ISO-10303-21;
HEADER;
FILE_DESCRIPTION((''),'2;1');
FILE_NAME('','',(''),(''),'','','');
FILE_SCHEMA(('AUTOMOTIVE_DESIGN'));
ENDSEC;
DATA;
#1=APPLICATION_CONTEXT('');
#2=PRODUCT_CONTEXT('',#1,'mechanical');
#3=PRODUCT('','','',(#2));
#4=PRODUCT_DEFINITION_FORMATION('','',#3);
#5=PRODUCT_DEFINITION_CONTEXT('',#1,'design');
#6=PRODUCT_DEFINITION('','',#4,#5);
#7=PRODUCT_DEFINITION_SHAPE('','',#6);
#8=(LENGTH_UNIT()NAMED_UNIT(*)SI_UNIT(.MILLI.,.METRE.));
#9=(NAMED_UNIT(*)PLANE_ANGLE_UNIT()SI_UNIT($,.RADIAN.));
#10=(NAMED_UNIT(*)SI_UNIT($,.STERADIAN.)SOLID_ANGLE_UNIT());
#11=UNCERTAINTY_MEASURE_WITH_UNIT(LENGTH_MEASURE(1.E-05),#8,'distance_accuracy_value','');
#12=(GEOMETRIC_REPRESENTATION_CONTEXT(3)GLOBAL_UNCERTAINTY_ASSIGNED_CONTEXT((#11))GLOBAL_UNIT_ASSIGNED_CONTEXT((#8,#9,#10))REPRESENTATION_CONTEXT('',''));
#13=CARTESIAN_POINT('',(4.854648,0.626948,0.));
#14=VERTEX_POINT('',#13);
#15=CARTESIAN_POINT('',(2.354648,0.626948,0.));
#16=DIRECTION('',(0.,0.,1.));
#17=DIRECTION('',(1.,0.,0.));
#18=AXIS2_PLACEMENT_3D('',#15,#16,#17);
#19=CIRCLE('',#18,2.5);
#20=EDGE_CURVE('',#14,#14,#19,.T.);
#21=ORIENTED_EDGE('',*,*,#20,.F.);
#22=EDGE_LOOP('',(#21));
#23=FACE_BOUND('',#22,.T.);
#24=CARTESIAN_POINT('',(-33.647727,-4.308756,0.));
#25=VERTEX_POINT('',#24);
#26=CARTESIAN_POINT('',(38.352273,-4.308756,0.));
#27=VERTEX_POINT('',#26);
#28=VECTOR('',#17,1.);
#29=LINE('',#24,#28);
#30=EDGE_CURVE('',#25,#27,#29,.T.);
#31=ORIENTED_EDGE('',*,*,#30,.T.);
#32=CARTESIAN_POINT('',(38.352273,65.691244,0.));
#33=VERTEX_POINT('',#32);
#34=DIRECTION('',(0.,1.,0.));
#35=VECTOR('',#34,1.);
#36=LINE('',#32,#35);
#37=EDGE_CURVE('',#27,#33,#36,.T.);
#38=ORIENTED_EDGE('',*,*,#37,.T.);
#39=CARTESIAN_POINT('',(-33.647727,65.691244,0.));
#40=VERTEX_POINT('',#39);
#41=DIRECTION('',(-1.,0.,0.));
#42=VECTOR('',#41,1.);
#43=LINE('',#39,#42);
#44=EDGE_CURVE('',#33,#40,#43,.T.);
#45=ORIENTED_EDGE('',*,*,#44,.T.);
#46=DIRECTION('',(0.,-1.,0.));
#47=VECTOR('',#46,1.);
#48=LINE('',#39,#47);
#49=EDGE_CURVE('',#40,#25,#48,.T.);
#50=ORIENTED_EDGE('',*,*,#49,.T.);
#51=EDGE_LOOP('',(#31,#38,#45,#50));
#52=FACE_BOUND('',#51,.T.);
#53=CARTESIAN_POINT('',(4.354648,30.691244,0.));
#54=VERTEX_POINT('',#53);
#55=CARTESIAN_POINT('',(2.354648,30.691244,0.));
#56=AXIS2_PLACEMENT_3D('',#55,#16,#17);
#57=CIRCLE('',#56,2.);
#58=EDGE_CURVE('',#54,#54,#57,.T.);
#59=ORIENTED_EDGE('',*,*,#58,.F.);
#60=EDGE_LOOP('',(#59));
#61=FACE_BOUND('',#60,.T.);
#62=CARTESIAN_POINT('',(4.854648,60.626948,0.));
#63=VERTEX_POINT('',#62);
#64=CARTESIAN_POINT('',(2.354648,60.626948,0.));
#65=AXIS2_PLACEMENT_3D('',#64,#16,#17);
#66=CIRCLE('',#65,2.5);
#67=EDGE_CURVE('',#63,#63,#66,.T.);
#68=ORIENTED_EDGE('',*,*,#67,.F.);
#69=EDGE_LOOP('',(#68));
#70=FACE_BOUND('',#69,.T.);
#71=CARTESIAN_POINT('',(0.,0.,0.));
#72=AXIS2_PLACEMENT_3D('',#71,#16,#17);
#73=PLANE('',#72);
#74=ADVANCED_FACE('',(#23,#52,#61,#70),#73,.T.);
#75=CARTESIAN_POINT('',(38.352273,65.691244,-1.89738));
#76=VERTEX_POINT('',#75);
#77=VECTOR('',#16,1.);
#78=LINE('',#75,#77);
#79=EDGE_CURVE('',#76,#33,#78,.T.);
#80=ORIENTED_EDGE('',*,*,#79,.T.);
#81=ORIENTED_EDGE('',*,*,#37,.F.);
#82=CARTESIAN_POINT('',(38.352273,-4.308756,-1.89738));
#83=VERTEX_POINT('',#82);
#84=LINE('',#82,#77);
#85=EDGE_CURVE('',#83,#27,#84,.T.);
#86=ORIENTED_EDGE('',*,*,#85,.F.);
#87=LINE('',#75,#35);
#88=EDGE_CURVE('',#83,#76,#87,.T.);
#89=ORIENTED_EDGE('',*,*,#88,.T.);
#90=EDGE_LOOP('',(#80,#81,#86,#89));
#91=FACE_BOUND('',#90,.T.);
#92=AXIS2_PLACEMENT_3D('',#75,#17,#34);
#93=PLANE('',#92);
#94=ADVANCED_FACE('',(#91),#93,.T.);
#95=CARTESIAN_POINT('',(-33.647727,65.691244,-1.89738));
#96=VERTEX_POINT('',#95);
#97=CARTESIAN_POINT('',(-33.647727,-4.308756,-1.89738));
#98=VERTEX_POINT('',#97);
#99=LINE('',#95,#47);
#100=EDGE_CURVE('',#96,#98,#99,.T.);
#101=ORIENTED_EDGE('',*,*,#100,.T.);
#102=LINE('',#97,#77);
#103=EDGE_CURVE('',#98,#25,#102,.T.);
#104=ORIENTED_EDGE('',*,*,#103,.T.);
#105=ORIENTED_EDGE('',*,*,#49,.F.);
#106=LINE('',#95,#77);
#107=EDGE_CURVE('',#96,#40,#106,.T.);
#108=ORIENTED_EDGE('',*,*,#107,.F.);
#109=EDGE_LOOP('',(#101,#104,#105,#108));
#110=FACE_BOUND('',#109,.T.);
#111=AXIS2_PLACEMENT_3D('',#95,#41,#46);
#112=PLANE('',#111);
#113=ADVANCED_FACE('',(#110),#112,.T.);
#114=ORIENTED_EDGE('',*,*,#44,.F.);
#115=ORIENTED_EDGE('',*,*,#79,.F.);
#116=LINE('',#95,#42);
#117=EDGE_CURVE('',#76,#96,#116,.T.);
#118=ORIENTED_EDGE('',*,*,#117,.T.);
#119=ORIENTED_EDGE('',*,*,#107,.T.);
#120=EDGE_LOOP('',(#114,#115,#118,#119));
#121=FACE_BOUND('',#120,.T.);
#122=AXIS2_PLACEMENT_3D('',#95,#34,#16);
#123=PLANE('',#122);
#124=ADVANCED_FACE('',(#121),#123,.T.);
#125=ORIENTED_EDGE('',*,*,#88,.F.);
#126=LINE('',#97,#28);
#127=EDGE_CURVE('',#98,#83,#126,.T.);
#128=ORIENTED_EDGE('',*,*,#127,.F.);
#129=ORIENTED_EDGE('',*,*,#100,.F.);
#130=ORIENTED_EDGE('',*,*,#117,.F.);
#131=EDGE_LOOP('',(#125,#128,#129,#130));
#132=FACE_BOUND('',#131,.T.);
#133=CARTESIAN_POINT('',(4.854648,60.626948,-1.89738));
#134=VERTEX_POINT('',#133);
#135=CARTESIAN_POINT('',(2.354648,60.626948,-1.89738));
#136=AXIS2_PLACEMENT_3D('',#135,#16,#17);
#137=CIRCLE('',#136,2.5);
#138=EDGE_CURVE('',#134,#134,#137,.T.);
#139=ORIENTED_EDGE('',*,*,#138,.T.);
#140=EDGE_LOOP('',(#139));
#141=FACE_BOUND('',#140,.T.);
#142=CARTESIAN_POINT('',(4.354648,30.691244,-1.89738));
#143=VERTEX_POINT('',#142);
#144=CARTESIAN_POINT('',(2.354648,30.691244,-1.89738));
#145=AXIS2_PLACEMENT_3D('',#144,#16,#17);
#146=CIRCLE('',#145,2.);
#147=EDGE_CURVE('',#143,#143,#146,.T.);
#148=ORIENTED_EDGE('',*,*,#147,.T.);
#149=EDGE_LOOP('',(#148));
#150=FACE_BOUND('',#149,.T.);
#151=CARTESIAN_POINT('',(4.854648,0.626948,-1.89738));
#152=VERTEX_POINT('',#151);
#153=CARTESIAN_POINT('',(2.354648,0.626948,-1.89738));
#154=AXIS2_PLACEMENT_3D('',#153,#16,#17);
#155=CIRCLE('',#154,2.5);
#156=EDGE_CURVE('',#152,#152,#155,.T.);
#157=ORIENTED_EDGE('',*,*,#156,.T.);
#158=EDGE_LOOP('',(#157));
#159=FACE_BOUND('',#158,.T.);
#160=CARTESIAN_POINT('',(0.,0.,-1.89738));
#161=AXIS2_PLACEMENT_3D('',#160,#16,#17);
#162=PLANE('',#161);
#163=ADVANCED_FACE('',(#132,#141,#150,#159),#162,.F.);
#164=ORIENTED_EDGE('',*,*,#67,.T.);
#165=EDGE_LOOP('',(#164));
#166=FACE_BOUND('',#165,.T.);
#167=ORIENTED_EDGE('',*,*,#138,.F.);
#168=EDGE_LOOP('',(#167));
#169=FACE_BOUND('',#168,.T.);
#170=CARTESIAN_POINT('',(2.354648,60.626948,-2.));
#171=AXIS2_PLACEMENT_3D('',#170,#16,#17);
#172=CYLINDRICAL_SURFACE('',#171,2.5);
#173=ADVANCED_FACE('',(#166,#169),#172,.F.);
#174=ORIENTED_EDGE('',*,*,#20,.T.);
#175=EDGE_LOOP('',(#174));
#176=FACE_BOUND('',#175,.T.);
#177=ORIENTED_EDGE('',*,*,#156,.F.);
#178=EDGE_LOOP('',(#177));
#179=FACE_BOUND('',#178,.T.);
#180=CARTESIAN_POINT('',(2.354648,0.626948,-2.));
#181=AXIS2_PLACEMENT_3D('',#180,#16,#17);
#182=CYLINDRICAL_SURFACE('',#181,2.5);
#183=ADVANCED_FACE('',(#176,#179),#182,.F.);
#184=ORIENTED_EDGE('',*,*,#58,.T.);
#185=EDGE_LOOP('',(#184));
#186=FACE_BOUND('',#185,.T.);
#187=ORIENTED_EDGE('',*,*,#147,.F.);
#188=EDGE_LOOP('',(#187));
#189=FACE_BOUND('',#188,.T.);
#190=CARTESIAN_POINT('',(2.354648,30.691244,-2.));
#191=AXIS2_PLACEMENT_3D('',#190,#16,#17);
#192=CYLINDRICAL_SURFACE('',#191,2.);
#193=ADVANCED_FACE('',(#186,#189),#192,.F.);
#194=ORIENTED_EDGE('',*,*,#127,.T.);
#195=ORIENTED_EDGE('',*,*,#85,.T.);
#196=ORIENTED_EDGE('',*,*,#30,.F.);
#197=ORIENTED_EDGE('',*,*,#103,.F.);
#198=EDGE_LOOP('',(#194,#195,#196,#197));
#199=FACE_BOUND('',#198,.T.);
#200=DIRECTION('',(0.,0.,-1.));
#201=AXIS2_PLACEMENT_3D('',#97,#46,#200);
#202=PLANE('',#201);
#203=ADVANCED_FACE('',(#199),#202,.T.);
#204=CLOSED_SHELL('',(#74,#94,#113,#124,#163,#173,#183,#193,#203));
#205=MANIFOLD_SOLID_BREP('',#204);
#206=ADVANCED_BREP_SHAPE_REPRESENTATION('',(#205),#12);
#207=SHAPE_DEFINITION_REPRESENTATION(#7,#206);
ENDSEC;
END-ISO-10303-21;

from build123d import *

# Parameters (mm, degrees)
SKETCH1_W          = 72
SKETCH1_H          = 70
BASE_FLANGE1_DEPTH = 1.89738
SKETCH6_R          = 2.5
SKETCH6_R_2        = 2
CUT_EXTRUDE1_DEPTH = 2


# Sheet-metal steps are written as plain solids
with BuildPart() as part:
    # Sketch1 → Base-Flange1 (new body)
    with BuildSketch(Plane.XY):
        with Locations((2.352272727, 30.691243667)):
            Rectangle(SKETCH1_W, SKETCH1_H)
    extrude(amount=-BASE_FLANGE1_DEPTH)

    # Sketch6 → Cut-Extrude1 (cut)
    with BuildSketch(Plane.XY):
        with Locations((2.354647746, 60.626948244)):
            Circle(SKETCH6_R)
        with Locations((2.354647746, 0.626948244)):
            Circle(SKETCH6_R)
        with Locations((2.354647746, 30.691243667)):
            Circle(SKETCH6_R_2)
    extrude(amount=-CUT_EXTRUDE1_DEPTH, mode=Mode.SUBTRACT)


solid = part.part
